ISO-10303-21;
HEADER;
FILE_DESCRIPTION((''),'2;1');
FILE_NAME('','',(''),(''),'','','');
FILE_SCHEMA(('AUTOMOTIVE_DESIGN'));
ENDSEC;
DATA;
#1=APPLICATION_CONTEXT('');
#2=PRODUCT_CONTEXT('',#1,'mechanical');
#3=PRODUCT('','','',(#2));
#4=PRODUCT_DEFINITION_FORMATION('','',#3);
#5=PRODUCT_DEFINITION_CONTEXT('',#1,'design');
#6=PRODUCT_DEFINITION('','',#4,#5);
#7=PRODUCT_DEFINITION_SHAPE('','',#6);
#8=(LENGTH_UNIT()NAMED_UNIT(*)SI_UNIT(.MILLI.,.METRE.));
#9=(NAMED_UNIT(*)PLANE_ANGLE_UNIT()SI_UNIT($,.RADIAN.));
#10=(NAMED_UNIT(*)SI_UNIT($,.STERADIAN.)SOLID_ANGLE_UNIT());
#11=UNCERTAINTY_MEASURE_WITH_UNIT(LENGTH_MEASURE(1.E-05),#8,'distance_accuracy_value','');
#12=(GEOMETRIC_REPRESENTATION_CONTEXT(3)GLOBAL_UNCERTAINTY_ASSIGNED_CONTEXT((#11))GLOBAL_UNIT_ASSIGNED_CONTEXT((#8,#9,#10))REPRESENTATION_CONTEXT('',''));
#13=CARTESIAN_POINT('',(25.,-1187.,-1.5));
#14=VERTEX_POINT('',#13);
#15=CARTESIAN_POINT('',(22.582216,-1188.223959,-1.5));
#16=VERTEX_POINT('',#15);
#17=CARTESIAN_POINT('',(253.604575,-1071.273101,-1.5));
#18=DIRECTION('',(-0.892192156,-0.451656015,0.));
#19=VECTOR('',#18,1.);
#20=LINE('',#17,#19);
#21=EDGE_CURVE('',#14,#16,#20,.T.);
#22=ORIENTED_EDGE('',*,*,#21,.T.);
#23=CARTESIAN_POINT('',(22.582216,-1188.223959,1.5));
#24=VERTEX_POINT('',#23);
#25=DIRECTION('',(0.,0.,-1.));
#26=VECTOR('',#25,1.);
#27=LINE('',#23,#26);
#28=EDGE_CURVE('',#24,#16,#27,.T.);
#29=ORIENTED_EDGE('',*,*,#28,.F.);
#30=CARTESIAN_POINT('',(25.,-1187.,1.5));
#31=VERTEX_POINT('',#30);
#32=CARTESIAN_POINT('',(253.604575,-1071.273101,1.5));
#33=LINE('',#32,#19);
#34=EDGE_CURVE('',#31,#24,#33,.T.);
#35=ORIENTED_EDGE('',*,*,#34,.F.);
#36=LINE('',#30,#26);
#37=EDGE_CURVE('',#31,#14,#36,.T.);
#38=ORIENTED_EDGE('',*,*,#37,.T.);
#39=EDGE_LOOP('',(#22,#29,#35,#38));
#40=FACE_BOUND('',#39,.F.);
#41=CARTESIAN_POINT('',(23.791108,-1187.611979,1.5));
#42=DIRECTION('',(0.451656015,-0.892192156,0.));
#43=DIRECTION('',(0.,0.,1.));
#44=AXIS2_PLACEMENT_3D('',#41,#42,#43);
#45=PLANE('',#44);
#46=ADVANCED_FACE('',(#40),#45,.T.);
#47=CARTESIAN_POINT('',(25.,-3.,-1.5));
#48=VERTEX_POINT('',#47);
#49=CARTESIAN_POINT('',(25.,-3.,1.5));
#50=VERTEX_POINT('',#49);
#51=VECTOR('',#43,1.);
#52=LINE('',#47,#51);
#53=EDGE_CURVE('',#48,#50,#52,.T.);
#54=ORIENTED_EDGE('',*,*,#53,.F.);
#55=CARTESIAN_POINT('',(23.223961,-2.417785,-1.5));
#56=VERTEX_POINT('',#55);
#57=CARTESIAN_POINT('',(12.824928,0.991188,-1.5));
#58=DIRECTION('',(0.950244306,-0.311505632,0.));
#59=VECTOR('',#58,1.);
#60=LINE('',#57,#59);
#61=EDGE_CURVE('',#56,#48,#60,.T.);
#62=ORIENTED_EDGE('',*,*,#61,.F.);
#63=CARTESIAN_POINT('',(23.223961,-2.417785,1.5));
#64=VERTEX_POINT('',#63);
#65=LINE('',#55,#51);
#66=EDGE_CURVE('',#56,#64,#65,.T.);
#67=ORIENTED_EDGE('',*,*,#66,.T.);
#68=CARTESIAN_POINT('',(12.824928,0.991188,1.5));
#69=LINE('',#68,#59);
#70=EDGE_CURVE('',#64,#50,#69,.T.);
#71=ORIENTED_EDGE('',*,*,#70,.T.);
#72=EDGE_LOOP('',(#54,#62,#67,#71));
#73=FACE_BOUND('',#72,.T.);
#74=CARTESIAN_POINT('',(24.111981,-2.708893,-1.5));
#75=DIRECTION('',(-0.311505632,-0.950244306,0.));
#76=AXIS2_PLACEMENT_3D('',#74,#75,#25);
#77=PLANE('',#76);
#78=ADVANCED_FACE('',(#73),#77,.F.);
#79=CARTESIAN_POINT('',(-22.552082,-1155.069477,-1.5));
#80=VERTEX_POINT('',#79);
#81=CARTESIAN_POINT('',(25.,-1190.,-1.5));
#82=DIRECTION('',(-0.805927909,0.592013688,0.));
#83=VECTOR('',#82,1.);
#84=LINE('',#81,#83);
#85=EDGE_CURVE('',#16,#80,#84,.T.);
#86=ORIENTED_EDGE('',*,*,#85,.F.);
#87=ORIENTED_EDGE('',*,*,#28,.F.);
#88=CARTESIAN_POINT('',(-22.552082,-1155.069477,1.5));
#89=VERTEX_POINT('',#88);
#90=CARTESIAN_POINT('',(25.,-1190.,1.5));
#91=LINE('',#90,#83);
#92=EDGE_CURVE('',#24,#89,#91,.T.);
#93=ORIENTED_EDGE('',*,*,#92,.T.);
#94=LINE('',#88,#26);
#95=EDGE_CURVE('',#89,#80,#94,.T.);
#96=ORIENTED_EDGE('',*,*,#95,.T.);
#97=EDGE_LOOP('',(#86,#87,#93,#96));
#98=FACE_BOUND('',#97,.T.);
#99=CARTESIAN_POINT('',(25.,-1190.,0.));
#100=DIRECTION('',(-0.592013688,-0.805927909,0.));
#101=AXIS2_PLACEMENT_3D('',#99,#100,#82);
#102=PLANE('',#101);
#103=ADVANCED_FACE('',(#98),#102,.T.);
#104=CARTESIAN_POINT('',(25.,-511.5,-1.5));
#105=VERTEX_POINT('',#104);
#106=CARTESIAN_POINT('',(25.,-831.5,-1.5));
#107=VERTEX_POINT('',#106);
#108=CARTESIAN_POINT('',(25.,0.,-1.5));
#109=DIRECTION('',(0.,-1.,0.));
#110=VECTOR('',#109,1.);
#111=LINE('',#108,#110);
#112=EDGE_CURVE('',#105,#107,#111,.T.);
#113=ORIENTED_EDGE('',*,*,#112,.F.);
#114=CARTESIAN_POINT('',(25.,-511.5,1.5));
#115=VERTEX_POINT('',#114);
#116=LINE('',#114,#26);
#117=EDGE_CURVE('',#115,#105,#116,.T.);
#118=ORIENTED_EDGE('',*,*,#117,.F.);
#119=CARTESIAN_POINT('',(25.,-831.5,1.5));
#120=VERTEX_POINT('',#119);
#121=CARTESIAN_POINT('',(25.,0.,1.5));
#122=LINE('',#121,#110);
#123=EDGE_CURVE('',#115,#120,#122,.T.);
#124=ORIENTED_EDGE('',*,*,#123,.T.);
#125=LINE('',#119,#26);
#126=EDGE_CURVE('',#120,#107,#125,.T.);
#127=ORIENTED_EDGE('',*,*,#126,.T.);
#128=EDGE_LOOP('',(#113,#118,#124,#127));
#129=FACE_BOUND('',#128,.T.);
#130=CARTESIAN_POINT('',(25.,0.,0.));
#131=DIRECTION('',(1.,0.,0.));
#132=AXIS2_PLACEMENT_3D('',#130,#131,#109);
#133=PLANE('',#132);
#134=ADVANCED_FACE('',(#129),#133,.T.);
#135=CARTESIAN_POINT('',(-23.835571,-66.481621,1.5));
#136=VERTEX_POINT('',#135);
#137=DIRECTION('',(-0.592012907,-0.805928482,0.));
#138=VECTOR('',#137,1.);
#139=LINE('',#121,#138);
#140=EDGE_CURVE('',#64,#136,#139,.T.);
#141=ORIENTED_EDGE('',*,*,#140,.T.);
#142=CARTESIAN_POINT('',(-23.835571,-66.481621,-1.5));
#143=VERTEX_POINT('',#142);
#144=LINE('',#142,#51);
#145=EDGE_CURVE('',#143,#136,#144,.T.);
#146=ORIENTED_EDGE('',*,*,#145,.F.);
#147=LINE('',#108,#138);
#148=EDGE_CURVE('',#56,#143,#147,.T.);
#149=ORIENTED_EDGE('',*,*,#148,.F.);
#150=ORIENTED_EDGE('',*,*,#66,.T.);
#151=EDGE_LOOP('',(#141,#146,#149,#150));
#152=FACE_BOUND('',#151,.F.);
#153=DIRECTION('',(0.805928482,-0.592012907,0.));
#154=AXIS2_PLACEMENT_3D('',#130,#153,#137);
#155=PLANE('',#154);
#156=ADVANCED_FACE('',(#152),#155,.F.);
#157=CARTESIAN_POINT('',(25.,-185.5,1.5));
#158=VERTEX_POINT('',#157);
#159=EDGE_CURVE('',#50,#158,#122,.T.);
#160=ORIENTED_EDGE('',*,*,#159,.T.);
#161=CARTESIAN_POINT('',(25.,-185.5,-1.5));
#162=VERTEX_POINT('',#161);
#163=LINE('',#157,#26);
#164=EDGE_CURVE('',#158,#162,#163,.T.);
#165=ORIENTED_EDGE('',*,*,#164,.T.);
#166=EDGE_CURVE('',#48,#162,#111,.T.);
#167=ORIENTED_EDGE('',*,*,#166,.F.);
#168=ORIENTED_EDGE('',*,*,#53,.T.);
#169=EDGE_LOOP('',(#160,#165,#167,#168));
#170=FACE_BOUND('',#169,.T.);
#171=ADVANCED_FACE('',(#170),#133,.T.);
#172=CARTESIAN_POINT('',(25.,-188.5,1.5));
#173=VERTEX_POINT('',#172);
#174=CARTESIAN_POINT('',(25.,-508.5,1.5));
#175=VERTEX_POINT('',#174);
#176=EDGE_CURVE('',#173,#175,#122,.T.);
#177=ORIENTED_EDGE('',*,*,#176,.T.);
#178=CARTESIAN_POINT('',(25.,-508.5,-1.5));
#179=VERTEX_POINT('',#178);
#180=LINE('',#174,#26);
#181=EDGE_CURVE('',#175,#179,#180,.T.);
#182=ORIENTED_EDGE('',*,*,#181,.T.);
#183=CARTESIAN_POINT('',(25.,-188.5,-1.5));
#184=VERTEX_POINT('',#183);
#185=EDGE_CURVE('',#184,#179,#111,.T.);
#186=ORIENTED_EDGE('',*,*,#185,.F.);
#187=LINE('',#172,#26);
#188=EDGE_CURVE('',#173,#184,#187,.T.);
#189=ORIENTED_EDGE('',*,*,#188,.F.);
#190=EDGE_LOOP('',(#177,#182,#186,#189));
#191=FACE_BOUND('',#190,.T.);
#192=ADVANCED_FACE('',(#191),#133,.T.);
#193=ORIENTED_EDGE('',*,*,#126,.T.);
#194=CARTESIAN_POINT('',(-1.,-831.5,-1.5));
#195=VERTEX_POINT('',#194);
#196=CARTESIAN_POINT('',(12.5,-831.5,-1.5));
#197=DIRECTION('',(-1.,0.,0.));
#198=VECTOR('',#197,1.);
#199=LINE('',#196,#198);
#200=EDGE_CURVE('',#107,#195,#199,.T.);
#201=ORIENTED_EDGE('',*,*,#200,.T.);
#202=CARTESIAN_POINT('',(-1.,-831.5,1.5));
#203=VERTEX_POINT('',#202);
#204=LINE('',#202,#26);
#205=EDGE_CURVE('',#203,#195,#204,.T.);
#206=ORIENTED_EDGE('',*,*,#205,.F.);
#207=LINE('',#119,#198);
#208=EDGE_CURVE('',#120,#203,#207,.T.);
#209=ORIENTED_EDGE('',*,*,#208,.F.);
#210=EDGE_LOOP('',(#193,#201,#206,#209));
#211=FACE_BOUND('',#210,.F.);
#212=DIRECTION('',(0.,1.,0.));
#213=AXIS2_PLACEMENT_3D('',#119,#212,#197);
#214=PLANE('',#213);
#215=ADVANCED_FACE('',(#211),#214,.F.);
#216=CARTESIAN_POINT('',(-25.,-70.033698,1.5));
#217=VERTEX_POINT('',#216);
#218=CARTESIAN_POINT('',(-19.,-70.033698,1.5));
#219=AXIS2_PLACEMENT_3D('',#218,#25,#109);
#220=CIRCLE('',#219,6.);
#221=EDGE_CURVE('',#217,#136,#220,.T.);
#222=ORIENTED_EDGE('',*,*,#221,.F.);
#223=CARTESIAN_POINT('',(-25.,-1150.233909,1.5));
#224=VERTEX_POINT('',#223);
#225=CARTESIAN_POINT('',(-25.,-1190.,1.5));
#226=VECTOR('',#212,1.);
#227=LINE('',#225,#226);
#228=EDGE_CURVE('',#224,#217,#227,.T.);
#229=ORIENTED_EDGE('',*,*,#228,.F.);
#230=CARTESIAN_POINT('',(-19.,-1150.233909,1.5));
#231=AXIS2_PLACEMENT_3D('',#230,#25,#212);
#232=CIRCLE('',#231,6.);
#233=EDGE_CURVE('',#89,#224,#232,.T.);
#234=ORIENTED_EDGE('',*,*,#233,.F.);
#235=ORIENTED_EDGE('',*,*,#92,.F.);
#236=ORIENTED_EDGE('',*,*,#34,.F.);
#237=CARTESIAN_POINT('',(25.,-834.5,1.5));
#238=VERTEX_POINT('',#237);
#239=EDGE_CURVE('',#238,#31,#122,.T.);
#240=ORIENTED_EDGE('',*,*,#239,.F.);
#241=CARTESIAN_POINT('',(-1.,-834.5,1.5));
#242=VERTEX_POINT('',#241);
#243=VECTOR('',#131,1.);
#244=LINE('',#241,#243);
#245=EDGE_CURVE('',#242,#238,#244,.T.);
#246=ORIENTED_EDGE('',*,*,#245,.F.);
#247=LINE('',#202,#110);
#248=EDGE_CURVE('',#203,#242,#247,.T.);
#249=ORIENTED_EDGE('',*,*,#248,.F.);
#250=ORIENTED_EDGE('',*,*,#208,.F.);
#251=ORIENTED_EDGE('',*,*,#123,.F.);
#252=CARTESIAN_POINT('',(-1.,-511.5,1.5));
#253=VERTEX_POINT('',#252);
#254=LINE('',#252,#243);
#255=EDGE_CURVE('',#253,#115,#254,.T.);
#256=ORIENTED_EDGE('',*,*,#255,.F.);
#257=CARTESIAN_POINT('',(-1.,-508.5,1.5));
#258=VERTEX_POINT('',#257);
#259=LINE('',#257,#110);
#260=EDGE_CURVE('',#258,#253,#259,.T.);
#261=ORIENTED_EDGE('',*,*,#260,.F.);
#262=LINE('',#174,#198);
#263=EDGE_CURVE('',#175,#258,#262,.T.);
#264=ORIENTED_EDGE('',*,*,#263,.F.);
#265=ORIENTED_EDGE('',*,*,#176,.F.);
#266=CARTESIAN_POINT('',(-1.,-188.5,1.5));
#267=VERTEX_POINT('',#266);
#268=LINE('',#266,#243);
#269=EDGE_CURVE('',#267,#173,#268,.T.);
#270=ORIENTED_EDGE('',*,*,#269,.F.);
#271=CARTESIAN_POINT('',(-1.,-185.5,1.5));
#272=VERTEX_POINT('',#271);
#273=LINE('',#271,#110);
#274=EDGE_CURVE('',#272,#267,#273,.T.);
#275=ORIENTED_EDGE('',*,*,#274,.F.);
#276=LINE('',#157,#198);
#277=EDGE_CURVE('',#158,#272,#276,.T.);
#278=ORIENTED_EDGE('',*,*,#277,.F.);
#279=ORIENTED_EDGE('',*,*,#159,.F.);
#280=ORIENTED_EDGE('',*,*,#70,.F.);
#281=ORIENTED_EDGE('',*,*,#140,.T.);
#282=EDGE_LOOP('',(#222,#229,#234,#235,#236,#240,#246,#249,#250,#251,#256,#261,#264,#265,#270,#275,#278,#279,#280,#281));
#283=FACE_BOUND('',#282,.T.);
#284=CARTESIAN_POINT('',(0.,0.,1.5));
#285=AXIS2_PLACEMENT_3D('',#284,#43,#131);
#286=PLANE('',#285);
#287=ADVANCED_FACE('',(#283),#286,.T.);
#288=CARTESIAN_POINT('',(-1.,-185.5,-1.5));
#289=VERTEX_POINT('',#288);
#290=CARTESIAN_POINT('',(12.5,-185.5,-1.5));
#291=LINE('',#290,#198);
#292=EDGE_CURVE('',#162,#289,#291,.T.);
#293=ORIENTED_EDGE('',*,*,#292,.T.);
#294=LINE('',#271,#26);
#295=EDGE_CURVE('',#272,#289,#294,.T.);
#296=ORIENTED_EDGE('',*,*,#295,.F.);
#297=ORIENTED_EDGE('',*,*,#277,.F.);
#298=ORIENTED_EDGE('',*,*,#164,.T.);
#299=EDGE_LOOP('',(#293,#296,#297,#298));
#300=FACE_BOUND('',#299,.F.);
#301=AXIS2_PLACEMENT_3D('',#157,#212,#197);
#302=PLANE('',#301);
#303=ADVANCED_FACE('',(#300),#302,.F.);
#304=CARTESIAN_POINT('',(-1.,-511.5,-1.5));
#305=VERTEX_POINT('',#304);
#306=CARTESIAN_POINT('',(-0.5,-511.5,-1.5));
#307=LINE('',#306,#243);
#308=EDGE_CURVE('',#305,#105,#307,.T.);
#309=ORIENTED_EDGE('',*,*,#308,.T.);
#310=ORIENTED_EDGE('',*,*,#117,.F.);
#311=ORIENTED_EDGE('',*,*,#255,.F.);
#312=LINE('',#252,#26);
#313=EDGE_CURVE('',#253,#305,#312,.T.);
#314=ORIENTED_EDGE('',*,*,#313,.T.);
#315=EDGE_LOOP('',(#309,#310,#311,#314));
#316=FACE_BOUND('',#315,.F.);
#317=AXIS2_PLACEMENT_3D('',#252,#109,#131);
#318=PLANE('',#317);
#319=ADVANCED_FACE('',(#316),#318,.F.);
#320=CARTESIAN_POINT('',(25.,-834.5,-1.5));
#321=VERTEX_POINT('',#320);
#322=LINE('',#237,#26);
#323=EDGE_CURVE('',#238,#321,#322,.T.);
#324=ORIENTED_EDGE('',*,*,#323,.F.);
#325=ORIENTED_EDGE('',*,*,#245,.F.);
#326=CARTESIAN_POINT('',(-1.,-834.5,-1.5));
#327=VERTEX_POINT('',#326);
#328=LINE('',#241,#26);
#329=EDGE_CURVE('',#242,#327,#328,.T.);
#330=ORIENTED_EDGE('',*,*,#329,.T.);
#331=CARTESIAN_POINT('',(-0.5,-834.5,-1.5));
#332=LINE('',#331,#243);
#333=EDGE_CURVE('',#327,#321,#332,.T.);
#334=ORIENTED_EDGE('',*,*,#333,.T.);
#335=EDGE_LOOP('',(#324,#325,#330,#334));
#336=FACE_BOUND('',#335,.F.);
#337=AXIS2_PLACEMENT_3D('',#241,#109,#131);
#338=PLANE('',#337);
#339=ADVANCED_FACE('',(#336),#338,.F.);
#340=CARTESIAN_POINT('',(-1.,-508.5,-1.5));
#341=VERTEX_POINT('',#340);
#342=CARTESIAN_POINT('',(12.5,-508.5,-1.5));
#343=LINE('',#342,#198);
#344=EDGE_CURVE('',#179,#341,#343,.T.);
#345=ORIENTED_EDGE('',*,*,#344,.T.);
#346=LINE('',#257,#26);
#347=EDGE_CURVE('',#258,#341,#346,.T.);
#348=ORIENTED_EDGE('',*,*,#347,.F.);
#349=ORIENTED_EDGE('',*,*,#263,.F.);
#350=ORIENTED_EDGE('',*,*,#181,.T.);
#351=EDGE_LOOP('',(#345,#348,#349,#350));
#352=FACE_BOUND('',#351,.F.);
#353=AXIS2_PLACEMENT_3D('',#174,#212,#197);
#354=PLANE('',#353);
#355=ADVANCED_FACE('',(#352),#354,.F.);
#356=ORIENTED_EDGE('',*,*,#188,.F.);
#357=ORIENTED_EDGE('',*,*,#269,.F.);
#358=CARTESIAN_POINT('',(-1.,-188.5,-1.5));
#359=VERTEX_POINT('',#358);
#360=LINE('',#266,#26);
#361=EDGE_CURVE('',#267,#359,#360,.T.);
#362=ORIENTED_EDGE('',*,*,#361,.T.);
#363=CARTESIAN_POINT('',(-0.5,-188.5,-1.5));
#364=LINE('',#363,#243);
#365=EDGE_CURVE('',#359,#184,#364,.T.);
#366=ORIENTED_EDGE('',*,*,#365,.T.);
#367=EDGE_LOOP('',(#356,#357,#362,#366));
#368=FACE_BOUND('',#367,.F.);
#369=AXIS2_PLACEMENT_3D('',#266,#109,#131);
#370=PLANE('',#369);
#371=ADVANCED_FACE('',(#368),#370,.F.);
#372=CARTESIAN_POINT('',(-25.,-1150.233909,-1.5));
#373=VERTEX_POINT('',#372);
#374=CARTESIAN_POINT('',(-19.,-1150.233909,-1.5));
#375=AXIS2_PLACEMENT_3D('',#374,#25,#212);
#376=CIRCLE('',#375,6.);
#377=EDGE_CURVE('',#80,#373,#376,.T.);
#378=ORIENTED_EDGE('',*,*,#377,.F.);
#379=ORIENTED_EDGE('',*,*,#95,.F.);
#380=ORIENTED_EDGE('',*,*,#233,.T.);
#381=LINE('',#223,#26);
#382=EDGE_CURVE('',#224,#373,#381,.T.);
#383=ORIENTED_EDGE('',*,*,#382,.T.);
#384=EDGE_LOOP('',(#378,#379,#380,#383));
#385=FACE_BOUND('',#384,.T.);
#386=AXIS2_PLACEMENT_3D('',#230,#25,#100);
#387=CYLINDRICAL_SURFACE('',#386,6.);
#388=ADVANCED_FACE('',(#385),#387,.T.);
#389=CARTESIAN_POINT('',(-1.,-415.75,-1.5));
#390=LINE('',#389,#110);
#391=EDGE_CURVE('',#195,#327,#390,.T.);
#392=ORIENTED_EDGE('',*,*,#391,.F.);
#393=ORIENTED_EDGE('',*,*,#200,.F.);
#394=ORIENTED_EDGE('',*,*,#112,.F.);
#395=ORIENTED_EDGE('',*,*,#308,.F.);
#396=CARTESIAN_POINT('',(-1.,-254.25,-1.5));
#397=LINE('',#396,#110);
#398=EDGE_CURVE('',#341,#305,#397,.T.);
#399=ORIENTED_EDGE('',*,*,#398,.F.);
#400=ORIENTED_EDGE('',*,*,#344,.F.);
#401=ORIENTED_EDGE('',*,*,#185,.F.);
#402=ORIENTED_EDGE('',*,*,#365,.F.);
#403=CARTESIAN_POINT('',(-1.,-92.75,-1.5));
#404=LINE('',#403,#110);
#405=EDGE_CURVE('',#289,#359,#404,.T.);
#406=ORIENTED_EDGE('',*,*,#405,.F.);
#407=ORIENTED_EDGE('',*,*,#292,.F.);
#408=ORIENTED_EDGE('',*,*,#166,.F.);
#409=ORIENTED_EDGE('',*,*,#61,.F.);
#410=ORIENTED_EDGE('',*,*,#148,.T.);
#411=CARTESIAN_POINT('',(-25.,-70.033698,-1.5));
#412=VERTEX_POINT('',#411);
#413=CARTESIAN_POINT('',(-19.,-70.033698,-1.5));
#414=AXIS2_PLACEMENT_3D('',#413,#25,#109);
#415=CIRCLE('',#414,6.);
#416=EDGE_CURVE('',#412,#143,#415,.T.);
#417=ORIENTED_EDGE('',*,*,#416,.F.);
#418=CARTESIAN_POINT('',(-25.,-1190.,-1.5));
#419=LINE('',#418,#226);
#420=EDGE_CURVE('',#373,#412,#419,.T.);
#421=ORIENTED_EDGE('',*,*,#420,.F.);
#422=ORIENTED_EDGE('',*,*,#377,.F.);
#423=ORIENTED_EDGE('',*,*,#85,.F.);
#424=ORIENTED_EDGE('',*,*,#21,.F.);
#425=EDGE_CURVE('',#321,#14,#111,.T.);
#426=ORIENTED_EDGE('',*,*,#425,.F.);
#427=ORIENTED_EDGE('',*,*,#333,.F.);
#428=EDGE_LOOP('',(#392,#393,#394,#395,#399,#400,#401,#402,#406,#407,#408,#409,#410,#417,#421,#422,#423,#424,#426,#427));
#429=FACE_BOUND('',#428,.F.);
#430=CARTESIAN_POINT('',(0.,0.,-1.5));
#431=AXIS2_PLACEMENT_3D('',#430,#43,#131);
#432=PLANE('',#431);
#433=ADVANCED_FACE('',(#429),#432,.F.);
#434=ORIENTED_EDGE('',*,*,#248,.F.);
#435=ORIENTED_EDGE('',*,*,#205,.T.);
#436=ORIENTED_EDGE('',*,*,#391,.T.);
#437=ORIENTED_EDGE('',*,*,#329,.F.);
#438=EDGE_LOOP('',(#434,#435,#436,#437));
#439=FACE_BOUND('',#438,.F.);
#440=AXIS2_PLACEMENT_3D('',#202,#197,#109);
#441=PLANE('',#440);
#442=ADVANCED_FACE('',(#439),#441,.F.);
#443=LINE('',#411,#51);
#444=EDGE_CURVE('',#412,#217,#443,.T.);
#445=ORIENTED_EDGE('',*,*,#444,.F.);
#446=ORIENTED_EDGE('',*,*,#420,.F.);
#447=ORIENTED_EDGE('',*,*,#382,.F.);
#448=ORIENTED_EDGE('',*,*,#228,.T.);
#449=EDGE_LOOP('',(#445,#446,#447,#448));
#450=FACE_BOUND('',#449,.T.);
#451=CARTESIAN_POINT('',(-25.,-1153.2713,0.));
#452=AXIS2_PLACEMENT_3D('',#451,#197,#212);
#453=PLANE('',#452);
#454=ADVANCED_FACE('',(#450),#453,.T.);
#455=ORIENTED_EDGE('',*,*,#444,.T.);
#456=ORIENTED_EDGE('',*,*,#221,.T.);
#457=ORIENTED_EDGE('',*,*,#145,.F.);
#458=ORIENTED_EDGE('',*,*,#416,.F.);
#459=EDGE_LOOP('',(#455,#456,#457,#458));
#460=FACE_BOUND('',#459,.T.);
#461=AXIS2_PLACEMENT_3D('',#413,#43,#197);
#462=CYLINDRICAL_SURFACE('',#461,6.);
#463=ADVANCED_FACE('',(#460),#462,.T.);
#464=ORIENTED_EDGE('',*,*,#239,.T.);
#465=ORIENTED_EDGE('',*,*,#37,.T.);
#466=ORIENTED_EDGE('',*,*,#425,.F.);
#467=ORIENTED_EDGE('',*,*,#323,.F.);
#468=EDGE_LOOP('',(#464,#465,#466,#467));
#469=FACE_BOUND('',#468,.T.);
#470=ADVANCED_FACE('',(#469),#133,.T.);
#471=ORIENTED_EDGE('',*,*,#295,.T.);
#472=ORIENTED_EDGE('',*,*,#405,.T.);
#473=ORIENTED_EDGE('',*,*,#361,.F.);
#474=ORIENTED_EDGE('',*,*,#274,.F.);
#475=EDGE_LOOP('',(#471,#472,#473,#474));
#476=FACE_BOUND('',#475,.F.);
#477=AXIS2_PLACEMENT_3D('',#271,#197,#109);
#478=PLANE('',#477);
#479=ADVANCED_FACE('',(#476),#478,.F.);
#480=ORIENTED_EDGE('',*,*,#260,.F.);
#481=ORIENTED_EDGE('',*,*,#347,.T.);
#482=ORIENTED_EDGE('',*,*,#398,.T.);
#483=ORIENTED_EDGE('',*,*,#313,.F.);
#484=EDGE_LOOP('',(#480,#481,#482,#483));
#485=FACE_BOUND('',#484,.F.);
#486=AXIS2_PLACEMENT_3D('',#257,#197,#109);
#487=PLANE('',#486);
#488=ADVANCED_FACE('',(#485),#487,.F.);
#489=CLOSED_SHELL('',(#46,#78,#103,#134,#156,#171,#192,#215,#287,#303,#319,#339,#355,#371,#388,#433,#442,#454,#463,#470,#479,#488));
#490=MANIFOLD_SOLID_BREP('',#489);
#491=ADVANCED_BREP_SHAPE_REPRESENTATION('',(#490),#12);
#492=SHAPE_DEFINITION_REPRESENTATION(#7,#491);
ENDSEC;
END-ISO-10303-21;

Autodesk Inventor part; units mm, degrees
ref_plane "YZ Plane" through (0, 0, 0) normal (1, 0, 0) x (0, 1, 0)
ref_plane "XZ Plane" through (0, 0, 0) normal (0, 1, 0) x (-1, 0, 0)
ref_plane "XY Plane" through (0, 0, 0) normal (0, 0, 1) x (1, 0, 0)
sketch "Sketch1" plane through (0, 0, 0) normal (0, 0, 1) x (1, 0, 0)
  line L0 (-25, 0) -> (25, 0)
  line L1 (25, 0) -> (25, -1190)
  line L2 (25, -1190) -> (-25, -1190)
  line L3 (-25, -1190) -> (-25, 0)
  line L4 (25, -1190) -> (-25, -1153.2713)
  line L5 (25, 0) -> (-25, -68.0668)
  point P0 (0, 0)
  point P1 (0, 0)
  point P2 (25, -1153.2713)
  dimension "d0" = 50
  dimension "d1" = 1190
  dimension "d5" = 53.7
  dimension "d6" = 53.7
extrude "Plate1" add sketch "Sketch1" along normal mid plane 3 contours L1 L4 L3 L5
chamfer "Corner Chamfer1" distance 3 angle 45 1 edges at (25, -1190, 0)
fillet "Corner Round1" radius 6 1 edges at (-25, -1153.2713, 0)
fillet "Corner Round2" radius 6 1 edges at (-25, -68.0668, 0)
chamfer "Corner Chamfer3" distance 3 angle 45 1 edges at (25, 0, 0)
sketch "Sketch3" plane through (0, 0, 1.5) normal (0, 0, 1) x (1, 0, 0)
  line L0 (-1, -188.5) -> (25, -188.5)
  line L1 (25, -188.5) -> (25, -185.5)
  line L2 (25, -185.5) -> (-1, -185.5)
  line L3 (-1, -185.5) -> (-1, -188.5)
  line L4 (25, -3) -> (25, -1187) projected
  point P0 (0, 0)
  point P1 (25, -187)
  dimension "d18" = 187
  dimension "d19" = 26
  dimension "d20" = 3
extrude "Extrusion1" cut sketch "Sketch3" against normal through all
pattern_linear "Rectangular Pattern1" count 3 spacing 323 along (0, -1, 0) of "Extrusion1"
sketch "Sketch4" plane through (0, 0, -1.5) normal (0, 0, -1) x (-1, 0, 0)
  line L0 (-5.565, -286.9038) -> (3.4627, -286.9038) construction
  line L1 (3.4627, -286.9038) -> (3.4627, -416.417) construction
  line L2 (3.4627, -416.417) -> (-5.565, -416.417) construction
  line L3 (-5.565, -416.417) -> (-5.565, -286.9038) construction
  point P0 (0, 0)
mark "Mark1"
equation "\"d6\" = d5"
equation "\"d2\" = Thickness"
equation "\"BendReliefWidth\" = Thickness"
equation "\"BendReliefDepth\" = 0.5 * Thickness"
equation "\"CornerReliefSize\" = 4 * Thickness"
equation "\"MinimumRemnant\" = 2 * Thickness"
equation "\"TransitionRadius\" = BendRadius"
equation "\"JacobiRadiusSize\" = BendRadius"
equation "\"GapSize\" = Thickness"
equation "\"Thickness\" = 3"
equation "\"BendRadius\" = 5"
properties part number "MSC 602 STRINGER CONE EXIT BACK" material "Stainless Steel"
